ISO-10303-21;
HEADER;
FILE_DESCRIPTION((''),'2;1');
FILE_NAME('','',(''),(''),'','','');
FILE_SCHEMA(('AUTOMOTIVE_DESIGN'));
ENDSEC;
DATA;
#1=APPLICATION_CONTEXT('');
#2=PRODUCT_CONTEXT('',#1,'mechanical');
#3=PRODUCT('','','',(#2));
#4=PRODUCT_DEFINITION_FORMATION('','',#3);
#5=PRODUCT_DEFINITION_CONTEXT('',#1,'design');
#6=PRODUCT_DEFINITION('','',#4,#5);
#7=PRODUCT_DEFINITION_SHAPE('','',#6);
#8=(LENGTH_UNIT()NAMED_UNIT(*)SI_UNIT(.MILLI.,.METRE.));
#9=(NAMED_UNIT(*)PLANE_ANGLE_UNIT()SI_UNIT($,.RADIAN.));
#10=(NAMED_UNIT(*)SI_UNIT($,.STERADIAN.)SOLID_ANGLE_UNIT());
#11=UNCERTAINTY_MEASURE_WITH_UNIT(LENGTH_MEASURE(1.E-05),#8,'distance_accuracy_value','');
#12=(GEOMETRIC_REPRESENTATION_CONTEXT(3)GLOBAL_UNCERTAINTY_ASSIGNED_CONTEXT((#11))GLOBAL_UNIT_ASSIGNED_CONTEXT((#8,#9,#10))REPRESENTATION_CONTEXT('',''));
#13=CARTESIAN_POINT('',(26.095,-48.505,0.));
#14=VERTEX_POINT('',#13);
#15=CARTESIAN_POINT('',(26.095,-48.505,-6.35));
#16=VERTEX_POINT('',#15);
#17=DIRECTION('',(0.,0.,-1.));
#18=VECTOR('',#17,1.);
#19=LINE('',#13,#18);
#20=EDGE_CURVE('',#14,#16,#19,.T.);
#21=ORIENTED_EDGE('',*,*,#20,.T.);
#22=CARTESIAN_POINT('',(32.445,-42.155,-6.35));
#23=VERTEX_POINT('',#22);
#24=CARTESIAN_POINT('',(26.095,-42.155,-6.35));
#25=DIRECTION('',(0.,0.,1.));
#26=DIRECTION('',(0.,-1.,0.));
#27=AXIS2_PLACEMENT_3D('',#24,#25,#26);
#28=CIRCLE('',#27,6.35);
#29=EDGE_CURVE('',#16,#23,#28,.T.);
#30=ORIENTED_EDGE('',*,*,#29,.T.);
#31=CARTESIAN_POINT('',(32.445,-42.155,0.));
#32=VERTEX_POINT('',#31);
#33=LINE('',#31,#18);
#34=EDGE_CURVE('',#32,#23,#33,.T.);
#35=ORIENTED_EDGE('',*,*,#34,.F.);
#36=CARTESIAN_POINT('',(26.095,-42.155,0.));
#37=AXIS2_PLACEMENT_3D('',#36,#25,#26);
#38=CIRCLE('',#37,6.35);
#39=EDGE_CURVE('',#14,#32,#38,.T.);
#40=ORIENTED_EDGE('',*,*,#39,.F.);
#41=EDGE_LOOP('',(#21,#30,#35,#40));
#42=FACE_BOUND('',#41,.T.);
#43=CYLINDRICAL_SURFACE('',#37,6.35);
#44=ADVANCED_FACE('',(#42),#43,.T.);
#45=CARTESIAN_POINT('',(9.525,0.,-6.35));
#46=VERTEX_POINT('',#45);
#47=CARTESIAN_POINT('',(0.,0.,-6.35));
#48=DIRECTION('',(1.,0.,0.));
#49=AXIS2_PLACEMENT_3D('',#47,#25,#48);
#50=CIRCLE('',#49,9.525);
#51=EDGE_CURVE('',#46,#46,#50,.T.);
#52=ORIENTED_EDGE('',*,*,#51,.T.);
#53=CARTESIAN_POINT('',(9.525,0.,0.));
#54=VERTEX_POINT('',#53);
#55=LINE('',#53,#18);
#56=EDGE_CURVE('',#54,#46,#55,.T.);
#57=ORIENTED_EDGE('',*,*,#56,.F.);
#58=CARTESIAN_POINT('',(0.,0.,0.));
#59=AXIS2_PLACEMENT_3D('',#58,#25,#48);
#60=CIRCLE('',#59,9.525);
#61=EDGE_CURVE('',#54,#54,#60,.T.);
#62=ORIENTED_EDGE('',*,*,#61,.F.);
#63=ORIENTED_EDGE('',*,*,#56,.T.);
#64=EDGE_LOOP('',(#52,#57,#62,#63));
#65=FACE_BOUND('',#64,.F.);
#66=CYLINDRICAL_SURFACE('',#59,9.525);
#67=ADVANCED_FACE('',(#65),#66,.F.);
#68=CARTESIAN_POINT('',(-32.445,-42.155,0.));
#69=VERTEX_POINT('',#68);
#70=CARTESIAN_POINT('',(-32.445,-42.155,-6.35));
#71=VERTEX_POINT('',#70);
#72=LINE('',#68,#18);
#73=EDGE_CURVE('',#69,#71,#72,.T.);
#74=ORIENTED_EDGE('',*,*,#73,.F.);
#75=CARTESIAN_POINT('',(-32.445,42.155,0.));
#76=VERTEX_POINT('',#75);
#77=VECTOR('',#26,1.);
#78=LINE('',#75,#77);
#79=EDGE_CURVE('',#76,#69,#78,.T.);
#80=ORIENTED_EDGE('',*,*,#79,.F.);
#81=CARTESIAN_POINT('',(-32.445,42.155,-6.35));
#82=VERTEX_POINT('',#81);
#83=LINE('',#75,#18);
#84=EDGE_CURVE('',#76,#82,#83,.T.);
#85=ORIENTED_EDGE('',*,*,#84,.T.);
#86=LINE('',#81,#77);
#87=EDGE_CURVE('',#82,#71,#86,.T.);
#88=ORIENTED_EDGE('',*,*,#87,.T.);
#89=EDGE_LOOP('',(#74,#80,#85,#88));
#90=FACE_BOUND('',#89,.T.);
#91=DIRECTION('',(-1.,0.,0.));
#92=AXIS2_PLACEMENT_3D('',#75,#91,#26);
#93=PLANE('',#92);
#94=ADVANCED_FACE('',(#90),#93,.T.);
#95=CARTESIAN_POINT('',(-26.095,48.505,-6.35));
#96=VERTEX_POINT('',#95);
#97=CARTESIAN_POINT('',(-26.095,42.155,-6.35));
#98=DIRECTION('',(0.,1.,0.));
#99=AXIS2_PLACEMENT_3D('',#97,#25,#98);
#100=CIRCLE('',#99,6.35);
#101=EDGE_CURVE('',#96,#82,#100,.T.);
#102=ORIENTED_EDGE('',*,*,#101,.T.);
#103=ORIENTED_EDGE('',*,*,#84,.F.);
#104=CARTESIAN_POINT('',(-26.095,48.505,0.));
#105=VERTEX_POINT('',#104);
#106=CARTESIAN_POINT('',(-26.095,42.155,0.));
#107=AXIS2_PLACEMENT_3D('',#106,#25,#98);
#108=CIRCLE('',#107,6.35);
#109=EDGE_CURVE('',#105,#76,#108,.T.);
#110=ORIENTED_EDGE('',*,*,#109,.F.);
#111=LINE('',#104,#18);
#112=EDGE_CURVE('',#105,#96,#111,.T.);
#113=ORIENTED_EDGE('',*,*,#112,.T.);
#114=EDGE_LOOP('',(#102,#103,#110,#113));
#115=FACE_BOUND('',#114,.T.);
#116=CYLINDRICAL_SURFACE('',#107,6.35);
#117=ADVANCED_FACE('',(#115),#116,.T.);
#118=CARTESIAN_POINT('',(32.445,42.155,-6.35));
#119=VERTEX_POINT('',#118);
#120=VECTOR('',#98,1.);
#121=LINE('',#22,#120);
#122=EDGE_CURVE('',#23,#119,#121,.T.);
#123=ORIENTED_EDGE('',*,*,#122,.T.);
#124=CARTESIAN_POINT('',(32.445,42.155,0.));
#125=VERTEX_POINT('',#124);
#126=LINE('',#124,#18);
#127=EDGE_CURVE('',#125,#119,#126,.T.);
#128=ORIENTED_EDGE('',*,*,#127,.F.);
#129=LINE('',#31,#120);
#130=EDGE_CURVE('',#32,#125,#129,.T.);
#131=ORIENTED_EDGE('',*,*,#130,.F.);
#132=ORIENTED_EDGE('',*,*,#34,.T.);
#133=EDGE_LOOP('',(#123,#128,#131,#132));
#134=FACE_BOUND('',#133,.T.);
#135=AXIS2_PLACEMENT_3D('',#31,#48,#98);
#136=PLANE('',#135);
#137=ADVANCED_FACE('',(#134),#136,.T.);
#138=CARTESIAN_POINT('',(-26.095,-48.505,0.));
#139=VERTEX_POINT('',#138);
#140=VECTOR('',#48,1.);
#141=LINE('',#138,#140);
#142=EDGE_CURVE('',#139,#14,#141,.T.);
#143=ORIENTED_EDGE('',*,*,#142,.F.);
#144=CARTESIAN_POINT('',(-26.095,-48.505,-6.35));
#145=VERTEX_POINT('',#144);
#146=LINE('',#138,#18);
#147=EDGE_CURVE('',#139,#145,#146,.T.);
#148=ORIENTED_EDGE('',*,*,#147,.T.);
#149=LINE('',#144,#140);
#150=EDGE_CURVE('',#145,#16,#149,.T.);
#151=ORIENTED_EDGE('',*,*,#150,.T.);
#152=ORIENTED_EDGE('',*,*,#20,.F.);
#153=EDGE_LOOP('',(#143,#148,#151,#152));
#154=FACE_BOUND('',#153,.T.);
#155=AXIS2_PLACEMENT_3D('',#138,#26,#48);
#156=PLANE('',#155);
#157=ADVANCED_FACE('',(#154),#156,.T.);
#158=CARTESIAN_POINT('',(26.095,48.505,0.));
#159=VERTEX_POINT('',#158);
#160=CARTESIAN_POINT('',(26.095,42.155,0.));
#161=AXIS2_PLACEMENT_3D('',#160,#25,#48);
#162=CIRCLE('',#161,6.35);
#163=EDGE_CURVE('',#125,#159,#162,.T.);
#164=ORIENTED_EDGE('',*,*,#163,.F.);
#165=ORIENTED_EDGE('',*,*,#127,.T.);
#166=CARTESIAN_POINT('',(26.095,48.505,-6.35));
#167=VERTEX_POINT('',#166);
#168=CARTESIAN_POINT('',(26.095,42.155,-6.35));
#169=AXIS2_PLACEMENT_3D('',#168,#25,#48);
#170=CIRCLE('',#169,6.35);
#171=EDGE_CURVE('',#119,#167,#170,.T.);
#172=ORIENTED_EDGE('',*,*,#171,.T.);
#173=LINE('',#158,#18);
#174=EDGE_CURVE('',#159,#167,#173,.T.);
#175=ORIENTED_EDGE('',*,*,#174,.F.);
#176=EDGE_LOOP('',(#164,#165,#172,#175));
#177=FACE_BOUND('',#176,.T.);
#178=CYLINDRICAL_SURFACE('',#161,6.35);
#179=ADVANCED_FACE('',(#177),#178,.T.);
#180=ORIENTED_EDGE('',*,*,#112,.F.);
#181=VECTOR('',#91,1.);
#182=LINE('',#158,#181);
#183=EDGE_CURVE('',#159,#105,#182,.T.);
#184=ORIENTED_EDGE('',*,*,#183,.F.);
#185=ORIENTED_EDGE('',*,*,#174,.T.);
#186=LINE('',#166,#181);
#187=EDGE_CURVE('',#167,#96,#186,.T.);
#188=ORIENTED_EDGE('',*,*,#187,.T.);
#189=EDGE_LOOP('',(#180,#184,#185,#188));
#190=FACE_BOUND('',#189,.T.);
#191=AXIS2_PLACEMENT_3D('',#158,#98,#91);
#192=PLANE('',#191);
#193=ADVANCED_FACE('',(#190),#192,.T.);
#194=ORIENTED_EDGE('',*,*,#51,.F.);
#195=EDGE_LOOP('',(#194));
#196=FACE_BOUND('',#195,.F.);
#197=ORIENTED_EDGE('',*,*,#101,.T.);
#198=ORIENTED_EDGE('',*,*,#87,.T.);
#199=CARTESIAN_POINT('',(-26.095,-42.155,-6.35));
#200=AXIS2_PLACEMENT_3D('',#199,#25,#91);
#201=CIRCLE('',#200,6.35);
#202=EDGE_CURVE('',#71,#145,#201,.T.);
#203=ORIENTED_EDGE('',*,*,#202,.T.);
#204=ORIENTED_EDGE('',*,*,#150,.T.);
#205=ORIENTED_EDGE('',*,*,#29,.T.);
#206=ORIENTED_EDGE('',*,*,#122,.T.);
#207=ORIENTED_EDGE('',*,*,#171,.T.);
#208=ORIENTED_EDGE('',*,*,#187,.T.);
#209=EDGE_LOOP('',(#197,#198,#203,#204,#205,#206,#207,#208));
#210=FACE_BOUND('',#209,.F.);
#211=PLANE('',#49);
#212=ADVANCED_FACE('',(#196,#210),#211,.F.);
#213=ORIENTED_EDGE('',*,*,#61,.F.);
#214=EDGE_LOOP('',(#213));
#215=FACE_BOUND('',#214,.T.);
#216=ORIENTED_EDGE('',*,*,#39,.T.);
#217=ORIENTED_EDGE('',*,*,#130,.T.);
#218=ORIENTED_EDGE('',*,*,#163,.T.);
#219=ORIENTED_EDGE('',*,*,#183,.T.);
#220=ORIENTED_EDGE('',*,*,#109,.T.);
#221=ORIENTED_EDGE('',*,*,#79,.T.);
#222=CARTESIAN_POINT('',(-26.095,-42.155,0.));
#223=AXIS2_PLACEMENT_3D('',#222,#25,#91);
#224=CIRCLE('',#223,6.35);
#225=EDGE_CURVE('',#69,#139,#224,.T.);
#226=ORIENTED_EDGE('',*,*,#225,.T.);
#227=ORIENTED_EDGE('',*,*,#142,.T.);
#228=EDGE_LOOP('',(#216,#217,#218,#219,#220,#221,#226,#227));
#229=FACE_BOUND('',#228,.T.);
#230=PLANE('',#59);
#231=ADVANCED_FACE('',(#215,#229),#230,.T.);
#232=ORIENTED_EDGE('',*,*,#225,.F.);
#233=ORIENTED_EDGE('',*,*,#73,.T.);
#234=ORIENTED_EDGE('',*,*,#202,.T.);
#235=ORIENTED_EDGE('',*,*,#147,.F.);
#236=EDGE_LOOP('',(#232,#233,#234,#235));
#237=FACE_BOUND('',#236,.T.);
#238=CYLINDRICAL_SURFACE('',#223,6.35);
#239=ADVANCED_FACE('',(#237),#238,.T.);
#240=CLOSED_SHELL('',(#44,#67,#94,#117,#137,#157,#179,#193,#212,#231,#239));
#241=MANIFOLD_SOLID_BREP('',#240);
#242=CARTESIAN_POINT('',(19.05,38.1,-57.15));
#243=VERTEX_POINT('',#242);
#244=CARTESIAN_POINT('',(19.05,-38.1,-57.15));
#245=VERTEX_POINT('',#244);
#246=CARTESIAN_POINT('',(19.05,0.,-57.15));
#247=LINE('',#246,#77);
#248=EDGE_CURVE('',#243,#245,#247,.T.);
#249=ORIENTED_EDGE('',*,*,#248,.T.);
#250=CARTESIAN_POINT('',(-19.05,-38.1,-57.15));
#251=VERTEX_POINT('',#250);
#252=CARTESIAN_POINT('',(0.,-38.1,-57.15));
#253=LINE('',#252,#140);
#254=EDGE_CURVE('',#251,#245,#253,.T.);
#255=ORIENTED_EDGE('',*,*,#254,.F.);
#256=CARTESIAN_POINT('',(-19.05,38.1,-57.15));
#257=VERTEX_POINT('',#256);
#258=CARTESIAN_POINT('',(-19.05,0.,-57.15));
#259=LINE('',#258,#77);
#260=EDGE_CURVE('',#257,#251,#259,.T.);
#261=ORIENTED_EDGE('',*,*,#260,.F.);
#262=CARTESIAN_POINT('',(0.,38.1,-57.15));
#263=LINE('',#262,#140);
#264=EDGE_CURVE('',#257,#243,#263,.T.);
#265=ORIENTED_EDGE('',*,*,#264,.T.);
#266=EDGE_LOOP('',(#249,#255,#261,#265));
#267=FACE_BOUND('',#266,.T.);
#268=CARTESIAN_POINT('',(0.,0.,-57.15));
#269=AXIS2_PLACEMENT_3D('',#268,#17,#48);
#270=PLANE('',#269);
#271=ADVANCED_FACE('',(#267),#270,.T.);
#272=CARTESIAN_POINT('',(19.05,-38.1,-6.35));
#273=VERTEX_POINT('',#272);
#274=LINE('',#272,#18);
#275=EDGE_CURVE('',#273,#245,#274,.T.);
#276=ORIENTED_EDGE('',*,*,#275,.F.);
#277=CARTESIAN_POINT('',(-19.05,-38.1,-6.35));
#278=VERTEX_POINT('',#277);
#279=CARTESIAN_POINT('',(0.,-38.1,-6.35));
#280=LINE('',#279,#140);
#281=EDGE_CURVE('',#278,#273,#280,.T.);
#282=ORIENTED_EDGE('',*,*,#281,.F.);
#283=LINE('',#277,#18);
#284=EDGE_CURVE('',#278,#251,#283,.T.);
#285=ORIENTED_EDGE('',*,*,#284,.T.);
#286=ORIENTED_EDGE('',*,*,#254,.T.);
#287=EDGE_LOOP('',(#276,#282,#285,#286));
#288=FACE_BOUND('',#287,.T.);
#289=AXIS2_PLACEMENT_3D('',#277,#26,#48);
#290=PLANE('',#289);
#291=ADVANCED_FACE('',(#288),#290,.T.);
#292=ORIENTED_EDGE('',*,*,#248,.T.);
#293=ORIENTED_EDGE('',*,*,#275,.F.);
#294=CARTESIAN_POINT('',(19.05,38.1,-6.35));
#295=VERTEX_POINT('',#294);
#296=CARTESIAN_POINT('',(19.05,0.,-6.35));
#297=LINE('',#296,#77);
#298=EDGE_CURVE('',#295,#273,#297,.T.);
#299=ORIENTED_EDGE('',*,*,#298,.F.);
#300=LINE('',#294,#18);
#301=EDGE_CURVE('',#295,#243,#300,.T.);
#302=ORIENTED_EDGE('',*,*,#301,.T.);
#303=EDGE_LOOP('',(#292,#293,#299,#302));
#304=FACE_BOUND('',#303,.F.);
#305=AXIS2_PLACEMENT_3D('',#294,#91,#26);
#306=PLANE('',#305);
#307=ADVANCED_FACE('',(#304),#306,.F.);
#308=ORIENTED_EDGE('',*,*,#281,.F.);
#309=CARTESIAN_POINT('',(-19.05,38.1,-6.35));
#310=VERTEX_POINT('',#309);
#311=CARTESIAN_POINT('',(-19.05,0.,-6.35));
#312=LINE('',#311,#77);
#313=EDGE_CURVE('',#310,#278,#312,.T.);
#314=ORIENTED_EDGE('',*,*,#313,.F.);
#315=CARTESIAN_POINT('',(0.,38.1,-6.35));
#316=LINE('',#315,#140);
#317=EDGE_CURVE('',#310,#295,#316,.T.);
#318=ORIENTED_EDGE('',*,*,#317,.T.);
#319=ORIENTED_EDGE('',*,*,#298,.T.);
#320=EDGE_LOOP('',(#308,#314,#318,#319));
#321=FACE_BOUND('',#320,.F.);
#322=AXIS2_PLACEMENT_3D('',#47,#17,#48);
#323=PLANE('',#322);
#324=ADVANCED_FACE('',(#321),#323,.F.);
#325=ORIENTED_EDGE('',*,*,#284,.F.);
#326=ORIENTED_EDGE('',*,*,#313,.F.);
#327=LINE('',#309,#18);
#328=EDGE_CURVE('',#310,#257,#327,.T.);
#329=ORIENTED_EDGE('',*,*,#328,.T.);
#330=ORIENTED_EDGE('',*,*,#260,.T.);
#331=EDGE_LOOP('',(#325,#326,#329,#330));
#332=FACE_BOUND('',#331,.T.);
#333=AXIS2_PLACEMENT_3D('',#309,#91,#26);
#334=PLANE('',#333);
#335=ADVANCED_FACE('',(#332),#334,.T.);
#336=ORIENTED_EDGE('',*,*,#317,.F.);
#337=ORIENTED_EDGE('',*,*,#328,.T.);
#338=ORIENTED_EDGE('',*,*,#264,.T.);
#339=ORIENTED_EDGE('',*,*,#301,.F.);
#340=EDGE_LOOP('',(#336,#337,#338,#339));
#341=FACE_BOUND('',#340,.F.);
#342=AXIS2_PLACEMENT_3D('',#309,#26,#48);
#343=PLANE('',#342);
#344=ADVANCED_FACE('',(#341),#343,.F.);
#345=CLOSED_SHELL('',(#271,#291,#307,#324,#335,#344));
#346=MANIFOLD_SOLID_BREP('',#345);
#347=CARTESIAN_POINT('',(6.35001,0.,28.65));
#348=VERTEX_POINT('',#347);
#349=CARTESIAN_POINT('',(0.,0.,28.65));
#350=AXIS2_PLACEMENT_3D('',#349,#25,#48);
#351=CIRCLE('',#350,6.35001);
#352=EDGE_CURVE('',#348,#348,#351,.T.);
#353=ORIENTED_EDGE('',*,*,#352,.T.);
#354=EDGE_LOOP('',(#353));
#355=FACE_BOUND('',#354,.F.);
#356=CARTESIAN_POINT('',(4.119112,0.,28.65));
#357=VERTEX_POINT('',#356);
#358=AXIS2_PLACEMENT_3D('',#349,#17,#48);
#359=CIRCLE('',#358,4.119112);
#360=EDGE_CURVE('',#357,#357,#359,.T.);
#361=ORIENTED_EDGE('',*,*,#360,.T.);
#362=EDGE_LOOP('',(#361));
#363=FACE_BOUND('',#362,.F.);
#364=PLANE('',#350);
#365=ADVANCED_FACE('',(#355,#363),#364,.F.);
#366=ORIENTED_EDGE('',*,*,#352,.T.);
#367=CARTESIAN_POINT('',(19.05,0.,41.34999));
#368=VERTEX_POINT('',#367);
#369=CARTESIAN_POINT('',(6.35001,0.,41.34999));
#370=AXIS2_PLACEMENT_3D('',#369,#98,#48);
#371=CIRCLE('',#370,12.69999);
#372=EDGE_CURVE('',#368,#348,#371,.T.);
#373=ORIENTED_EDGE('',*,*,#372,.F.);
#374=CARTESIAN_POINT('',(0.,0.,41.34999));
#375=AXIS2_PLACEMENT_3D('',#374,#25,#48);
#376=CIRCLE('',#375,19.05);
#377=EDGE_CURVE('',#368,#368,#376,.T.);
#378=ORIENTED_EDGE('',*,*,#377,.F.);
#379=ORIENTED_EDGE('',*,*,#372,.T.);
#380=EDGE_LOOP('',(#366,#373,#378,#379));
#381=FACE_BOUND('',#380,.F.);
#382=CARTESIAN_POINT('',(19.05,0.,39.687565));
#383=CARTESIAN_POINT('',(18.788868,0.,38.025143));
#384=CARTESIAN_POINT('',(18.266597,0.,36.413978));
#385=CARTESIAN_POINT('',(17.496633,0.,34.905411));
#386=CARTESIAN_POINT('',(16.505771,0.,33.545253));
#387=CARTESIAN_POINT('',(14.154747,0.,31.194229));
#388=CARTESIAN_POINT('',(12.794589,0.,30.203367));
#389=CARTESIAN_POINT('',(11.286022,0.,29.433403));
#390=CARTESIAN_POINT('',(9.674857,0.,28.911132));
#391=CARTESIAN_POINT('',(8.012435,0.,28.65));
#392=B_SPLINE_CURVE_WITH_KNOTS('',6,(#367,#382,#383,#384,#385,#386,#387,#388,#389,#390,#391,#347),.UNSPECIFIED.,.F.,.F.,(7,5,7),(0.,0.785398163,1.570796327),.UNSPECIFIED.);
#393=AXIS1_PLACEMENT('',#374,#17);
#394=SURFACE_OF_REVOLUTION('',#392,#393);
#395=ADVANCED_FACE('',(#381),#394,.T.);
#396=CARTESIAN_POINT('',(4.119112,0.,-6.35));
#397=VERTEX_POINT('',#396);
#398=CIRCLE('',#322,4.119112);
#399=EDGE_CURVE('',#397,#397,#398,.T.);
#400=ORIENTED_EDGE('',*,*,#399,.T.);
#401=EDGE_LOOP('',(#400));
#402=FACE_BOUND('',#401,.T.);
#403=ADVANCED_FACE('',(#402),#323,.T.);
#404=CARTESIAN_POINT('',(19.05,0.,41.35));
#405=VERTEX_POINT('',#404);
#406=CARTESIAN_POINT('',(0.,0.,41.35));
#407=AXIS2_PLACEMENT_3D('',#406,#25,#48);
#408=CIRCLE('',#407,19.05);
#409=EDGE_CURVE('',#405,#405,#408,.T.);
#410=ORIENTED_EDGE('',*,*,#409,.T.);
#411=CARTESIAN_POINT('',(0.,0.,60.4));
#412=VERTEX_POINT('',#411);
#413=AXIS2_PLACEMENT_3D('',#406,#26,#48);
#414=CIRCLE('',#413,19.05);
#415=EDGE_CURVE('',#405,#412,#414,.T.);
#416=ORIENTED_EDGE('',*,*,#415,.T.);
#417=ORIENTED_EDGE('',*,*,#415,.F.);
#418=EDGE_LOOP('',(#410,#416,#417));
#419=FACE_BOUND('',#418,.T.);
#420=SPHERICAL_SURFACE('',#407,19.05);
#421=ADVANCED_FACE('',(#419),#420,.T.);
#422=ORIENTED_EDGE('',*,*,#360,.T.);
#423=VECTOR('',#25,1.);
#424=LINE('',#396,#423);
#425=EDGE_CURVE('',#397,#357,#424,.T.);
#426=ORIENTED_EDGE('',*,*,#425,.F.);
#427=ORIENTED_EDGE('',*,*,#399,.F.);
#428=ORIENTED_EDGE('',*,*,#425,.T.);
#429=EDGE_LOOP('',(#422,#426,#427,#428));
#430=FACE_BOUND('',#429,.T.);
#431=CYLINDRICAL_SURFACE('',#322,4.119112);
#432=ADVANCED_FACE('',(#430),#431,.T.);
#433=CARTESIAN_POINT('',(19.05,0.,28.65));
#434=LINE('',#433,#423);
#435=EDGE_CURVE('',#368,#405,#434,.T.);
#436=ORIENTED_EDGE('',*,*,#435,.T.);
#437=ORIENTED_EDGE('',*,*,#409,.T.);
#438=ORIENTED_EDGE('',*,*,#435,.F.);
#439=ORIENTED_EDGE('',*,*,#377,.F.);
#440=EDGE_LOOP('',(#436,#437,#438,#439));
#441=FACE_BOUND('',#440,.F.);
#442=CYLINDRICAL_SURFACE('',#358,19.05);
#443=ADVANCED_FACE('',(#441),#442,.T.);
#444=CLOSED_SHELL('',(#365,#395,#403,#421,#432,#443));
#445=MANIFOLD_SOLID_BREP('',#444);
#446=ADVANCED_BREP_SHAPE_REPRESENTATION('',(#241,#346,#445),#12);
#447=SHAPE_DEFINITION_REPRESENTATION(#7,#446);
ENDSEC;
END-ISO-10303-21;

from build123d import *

# Parameters (mm, degrees)
F0_R     = 9.525
F1_DEPTH = 6.35
F2_R     = 4.1191118401
F3_DEPTH = 35
F4_R     = 19.05
F5_DEPTH = 31.75
F6_R     = 19.05
F7_R     = 12.69999
F8_W     = 38.1
F8_H     = 76.2
F8_R     = 9.525
F9_DEPTH = 50.8


# Not quite as in the source:
# - a fillet or chamfer is up to 0.001 mm smaller than in the source, because OpenCascade refuses the exact size


with BuildPart() as f1:
    # F0 (on Top) → F1 (new body)
    with BuildSketch(Plane.XY):
        with BuildLine():
            Line((26.095, 48.505), (-26.095, 48.505))
            ThreePointArc((-26.095, 48.505), (-30.5851280605, 46.6451280605), (-32.445, 42.155))
            Line((-32.445, 42.155), (-32.445, -42.155))
            ThreePointArc((-32.445, -42.155), (-30.5851280605, -46.6451280605), (-26.095, -48.505))
            Line((-26.095, -48.505), (26.095, -48.505))
            ThreePointArc((26.095, -48.505), (30.5851280605, -46.6451280605), (32.445, -42.155))
            Line((32.445, -42.155), (32.445, 42.155))
            ThreePointArc((32.445, 42.155), (30.5851280605, 46.6451280605), (26.095, 48.505))
        make_face()
        Circle(F0_R, mode=Mode.SUBTRACT)
    extrude(amount=-F1_DEPTH)


with BuildPart() as f3:
    # F2 (on face) → F3 (new body)
    with BuildSketch(Plane(origin=(0, 0, -6.35), x_dir=(1, 0, 0), z_dir=(0, 0, -1))):
        Circle(F2_R)
    extrude(amount=-F3_DEPTH)

    # F4 (on face) → F5 (join)
    with BuildSketch(Plane.XY.offset(28.65)):
        Circle(F4_R)
    extrude(amount=F5_DEPTH)

    # F6
    f6_edges = [f3.edges().sort_by_distance(p)[0] for p in [
        (-19.05, 0, 60.4),
    ]]
    fillet(f6_edges, radius=F6_R)

    # F7 (radius 12.7 in the source; OpenCascade refuses exactly that, so slightly less here)
    f7_edges = [f3.edges().sort_by_distance(p)[0] for p in [
        (-19.05, 0, 28.65),
    ]]
    fillet(f7_edges, radius=F7_R)


with BuildPart() as f9:
    # F8 (on face) → F9 (new body)
    with BuildSketch(Plane(origin=(0, 0, -6.35), x_dir=(1, 0, 0), z_dir=(0, 0, -1))):
        Rectangle(F8_W, F8_H)
        Circle(F8_R, mode=Mode.SUBTRACT)
        Circle(F8_R)
    extrude(amount=F9_DEPTH)


solid = Compound([f1.part, f3.part, f9.part])
